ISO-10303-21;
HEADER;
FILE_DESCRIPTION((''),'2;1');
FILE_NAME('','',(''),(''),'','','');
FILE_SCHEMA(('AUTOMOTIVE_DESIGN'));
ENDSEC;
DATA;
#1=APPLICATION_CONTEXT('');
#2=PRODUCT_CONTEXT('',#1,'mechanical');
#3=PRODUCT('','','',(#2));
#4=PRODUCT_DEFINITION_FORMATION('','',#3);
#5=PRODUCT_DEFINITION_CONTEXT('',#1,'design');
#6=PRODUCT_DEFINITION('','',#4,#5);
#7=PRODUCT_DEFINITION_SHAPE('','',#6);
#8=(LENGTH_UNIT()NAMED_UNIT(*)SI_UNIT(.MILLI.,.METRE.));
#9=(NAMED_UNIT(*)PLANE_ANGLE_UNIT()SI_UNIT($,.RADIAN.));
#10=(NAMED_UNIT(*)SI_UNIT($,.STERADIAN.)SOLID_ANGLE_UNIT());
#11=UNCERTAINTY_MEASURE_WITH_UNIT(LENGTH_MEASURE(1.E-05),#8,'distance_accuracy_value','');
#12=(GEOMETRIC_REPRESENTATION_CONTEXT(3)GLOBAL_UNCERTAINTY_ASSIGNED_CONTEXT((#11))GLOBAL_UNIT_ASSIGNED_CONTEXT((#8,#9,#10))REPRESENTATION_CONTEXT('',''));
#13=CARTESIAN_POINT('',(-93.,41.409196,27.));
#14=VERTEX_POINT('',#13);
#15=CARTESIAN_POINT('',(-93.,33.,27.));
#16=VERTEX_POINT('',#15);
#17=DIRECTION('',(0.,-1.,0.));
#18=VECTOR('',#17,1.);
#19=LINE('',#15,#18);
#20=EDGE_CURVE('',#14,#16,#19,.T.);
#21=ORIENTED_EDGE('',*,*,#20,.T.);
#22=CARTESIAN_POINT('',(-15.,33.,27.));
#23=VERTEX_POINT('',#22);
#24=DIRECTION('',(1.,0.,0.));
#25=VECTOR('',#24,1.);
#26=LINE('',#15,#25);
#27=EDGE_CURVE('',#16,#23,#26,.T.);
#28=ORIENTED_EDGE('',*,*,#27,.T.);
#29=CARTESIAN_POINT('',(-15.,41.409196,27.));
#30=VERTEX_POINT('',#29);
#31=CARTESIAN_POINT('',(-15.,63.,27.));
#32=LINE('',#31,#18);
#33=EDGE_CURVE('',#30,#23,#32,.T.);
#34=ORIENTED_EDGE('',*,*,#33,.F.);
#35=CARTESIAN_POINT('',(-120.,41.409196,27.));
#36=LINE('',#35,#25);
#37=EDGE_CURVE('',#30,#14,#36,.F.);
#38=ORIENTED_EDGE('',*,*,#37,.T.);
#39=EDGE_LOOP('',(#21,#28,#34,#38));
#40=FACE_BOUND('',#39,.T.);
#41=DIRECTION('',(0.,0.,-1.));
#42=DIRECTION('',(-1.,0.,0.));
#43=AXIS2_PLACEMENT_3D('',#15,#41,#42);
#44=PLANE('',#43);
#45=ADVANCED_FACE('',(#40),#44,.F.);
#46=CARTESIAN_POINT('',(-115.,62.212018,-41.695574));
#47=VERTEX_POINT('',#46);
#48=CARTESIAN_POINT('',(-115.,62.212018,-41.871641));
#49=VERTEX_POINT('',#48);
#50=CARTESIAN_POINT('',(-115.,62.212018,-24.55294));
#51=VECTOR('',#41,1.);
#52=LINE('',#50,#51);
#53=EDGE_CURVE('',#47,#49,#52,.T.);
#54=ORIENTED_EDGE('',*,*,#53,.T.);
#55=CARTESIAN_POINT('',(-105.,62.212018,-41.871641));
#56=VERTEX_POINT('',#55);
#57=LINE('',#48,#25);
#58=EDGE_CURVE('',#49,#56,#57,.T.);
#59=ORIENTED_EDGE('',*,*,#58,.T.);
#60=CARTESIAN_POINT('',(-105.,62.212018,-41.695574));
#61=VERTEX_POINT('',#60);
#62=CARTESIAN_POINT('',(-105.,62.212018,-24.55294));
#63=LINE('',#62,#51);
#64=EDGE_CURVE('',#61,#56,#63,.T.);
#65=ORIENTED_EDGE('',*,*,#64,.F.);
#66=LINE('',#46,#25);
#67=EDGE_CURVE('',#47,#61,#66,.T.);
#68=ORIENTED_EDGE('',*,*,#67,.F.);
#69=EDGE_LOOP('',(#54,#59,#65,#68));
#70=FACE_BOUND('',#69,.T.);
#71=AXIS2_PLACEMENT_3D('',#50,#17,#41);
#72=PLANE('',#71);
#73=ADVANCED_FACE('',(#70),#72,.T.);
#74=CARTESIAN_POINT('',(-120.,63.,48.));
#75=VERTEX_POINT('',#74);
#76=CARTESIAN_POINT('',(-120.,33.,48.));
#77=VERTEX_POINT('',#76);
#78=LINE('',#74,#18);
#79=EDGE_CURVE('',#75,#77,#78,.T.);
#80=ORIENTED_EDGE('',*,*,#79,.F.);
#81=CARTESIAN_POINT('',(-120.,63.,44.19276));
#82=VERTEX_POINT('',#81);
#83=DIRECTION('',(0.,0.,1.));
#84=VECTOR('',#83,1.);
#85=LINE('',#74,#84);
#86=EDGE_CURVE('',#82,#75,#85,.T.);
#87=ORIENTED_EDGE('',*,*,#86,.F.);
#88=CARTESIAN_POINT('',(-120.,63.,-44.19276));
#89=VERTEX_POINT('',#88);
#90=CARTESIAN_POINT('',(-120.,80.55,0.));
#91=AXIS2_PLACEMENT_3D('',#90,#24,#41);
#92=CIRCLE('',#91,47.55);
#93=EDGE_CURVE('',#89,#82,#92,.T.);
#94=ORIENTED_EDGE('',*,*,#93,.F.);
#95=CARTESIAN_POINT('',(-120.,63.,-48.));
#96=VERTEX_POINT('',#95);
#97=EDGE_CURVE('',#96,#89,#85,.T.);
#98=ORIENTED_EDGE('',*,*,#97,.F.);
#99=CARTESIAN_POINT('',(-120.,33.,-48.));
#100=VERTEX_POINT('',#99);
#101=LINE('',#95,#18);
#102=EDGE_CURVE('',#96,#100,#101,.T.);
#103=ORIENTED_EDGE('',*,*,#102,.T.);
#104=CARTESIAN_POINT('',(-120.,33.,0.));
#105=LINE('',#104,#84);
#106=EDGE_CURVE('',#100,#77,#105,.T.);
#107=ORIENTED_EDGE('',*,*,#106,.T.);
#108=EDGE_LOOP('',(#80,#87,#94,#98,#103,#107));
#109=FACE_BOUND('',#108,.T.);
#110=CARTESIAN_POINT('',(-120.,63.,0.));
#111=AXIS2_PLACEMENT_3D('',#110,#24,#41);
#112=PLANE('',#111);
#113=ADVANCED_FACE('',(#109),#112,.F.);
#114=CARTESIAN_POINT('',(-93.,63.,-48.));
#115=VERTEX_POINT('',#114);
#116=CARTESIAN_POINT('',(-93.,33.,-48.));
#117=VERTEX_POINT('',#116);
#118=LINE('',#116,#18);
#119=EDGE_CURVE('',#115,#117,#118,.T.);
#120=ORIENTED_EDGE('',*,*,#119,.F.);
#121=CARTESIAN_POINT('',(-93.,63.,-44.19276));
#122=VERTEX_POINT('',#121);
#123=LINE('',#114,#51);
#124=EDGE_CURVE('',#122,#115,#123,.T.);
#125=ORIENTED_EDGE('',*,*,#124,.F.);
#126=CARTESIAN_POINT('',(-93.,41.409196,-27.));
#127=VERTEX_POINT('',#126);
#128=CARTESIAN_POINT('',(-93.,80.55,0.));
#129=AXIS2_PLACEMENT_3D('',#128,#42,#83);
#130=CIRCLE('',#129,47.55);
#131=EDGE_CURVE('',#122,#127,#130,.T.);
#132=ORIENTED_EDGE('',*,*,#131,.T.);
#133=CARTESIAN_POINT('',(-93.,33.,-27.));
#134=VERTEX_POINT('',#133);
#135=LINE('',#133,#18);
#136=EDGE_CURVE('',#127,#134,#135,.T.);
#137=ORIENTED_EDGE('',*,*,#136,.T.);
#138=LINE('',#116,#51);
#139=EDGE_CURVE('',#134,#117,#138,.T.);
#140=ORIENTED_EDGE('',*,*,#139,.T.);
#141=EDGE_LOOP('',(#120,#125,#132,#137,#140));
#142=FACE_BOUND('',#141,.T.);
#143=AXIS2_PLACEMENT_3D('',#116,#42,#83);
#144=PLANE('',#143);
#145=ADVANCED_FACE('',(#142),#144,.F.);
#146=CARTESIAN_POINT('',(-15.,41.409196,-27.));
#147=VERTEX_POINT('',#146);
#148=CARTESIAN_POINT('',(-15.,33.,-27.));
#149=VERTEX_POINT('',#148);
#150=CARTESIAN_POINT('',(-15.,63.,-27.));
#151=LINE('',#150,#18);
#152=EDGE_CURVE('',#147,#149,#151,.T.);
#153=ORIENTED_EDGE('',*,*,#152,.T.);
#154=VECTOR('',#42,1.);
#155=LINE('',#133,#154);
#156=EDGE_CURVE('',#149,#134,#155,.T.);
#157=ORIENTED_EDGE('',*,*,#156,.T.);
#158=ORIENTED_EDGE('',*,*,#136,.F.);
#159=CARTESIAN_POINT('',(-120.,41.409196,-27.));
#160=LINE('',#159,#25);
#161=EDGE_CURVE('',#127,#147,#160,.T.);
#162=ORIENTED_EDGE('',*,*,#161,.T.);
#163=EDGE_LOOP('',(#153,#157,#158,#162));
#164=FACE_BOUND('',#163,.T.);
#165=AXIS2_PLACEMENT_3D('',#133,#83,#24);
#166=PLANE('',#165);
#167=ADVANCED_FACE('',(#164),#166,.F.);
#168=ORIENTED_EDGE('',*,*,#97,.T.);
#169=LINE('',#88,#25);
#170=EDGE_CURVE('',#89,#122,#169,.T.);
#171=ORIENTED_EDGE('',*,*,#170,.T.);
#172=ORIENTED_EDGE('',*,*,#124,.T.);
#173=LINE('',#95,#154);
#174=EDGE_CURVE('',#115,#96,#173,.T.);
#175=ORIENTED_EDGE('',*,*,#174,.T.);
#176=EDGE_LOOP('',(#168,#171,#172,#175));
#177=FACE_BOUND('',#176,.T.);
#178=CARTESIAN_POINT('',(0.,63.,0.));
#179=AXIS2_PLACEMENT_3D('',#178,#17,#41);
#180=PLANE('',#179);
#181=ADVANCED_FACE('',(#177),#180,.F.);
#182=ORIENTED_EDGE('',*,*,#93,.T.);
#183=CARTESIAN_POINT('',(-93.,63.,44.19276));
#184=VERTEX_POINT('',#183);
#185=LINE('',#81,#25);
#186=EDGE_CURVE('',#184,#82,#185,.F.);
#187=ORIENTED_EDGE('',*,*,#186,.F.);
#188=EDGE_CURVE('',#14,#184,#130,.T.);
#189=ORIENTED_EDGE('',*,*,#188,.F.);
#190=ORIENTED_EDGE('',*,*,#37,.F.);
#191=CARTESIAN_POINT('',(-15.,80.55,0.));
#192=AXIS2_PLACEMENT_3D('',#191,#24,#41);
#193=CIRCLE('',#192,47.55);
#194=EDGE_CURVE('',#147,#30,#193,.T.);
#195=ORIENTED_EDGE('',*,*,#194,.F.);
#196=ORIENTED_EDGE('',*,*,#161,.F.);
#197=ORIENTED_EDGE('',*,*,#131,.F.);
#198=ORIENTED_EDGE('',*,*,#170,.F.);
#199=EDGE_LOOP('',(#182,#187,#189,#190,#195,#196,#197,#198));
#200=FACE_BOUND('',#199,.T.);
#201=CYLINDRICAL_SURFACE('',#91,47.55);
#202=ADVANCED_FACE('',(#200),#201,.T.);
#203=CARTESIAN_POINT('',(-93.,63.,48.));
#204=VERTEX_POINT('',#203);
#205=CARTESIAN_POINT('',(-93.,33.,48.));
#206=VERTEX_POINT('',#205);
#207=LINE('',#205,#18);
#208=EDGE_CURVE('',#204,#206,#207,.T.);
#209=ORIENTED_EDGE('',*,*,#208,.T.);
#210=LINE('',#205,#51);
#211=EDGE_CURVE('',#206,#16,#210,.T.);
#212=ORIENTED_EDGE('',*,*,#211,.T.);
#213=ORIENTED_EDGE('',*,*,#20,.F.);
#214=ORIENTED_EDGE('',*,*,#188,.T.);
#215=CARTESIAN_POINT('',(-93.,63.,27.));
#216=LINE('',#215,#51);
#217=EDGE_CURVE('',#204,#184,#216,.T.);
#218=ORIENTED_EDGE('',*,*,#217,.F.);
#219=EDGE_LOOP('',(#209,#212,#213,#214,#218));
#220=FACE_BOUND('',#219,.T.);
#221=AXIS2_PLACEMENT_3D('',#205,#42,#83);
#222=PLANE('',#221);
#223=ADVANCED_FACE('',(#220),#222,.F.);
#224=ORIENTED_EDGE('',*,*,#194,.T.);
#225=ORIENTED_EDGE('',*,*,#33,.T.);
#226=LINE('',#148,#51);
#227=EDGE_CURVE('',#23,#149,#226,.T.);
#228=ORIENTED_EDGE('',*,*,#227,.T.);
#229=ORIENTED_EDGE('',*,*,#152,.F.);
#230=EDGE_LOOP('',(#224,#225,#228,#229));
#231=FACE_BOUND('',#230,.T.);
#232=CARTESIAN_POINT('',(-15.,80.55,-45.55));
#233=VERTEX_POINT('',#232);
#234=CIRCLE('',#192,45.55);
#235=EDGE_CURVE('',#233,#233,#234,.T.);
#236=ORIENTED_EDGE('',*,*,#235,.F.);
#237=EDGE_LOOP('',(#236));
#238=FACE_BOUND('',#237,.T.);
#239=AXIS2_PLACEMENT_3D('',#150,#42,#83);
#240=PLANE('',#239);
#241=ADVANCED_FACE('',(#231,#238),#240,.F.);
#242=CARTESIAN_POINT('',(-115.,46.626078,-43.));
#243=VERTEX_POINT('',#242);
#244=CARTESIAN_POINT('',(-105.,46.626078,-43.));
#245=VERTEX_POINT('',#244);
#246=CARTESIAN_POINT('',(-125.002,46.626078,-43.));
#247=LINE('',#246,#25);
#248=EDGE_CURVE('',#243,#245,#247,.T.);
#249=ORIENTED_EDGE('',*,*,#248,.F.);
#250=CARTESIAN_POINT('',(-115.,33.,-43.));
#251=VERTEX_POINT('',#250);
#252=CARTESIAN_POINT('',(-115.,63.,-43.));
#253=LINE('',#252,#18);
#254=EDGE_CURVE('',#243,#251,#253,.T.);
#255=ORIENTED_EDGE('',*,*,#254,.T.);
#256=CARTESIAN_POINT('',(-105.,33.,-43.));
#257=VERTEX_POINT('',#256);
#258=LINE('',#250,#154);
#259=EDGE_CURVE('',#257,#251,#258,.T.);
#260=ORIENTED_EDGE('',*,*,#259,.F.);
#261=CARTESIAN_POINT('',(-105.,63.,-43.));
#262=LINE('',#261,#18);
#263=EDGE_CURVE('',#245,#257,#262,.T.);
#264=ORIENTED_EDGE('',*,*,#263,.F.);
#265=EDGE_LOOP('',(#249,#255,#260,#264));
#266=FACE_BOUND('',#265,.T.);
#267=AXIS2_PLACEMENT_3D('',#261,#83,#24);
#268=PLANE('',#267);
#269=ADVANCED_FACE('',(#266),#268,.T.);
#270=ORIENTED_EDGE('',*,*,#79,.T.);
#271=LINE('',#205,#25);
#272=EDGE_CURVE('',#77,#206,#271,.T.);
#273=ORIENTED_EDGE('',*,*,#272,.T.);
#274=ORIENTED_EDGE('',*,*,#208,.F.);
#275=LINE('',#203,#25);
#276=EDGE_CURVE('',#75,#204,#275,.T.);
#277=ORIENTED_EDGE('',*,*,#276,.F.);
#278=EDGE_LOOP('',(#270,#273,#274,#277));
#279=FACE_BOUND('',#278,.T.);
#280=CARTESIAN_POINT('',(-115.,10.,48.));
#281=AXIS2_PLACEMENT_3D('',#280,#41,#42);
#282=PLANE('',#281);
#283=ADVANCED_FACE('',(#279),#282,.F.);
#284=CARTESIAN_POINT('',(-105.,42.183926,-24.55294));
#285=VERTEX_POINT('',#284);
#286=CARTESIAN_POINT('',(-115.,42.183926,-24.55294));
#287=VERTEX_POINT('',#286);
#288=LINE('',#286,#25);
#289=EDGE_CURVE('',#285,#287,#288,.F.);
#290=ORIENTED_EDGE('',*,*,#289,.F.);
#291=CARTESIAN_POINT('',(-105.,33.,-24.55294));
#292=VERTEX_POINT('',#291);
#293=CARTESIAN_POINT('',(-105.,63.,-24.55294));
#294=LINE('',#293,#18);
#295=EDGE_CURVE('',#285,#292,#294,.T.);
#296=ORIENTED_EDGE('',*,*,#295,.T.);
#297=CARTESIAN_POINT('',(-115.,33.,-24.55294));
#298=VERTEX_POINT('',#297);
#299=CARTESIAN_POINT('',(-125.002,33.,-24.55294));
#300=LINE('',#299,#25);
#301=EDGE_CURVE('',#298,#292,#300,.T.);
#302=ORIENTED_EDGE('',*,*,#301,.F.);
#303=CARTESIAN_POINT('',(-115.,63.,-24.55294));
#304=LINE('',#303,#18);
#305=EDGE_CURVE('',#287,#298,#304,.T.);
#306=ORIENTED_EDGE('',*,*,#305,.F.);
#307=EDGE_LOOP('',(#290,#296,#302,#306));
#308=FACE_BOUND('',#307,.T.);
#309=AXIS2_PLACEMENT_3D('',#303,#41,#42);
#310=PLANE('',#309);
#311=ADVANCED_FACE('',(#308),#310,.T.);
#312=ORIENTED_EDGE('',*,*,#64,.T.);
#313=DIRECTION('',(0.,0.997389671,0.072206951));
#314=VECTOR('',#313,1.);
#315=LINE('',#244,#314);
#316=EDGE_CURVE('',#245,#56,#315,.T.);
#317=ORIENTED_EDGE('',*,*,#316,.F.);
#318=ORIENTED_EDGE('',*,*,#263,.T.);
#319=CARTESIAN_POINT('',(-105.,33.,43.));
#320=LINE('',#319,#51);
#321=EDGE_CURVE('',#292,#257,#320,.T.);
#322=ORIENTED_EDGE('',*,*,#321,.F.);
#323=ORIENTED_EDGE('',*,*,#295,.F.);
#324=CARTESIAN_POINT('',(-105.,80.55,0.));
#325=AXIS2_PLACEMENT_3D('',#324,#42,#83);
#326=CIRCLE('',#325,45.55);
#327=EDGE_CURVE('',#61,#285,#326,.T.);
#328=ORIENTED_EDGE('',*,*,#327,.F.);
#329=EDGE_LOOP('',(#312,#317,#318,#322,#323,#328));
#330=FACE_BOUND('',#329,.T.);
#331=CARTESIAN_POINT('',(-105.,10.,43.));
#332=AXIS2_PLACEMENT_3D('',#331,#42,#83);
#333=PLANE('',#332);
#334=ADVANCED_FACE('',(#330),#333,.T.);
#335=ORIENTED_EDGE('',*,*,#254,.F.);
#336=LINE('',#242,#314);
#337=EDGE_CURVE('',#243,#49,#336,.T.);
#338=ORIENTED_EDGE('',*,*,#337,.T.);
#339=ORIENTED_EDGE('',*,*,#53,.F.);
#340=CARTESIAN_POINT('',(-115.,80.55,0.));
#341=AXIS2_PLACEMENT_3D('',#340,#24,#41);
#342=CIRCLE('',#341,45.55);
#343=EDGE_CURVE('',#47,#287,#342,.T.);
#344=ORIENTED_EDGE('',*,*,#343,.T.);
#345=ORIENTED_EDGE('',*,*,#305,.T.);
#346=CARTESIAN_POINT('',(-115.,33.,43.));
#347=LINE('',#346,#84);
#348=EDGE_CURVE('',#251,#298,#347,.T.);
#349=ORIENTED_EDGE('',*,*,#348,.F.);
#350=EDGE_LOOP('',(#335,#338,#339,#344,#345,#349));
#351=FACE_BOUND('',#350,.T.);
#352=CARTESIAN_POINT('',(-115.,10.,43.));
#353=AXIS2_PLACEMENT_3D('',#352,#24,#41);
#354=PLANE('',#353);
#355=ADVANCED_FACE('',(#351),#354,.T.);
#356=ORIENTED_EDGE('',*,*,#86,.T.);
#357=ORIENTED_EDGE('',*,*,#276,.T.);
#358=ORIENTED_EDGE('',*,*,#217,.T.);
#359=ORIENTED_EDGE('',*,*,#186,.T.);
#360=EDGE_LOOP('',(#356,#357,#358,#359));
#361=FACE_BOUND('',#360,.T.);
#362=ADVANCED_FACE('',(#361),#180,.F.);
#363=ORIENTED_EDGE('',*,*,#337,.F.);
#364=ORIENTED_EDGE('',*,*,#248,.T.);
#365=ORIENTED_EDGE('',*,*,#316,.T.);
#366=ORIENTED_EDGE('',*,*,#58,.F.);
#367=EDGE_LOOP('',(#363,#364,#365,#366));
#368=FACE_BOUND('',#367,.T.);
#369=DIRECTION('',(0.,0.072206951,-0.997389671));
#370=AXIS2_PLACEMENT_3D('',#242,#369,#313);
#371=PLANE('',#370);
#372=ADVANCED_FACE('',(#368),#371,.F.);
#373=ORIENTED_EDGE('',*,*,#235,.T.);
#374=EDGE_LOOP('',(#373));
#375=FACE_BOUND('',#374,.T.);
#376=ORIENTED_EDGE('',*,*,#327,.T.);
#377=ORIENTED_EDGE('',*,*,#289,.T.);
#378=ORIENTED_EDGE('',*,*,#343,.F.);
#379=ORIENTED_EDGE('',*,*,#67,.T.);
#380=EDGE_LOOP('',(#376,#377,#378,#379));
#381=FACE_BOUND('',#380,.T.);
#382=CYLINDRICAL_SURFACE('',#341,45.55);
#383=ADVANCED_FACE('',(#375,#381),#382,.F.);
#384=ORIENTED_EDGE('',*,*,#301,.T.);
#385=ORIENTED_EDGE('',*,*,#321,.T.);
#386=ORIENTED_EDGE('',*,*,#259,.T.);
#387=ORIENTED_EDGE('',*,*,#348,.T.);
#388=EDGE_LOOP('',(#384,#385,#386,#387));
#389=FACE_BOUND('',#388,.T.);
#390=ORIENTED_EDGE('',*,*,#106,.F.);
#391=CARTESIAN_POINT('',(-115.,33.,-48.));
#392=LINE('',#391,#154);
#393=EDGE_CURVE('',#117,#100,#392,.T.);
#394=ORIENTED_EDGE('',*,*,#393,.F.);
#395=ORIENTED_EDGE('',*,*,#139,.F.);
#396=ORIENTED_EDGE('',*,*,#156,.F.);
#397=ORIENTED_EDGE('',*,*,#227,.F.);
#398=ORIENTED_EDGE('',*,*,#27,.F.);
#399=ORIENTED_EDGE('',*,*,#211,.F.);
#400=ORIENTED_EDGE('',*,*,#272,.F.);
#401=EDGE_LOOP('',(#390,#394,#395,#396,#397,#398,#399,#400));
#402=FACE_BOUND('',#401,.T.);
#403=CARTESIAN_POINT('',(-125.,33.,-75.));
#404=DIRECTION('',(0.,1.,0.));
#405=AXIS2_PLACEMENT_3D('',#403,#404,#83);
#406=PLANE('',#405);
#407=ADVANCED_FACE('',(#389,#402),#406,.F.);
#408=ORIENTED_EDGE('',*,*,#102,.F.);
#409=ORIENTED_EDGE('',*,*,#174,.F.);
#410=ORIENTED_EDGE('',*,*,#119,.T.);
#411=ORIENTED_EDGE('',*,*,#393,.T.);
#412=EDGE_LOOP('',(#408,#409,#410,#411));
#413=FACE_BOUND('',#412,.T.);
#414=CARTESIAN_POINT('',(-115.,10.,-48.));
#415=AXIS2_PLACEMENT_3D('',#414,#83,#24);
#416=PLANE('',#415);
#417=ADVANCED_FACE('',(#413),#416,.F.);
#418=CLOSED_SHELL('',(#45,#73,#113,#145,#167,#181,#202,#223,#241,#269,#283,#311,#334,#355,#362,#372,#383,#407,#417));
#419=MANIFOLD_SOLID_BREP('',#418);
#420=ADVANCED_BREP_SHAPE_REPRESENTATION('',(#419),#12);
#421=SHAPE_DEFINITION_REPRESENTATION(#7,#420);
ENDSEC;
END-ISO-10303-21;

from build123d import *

# Parameters (mm, degrees)
SKETCH2_W                = 10
SKETCH2_H                = 86
BOSS_EXTRUDE1_DEPTH      = 10
SKETCH3_W                = 10
SKETCH3_H                = 86
BOSS_EXTRUDE2_DEPTH      = 23
BOSS_EXTRUDE3_REACH      = 246.16
BOSS_EXTRUDE4_DEPTH      = 100
BOSS_EXTRUDE4_DEPTH_BACK = 5
SKETCH5_R                = 47.55
SKETCH7_W                = 10
SKETCH7_H                = 18.447060317
BOSS_EXTRUDE6_DEPTH      = 30
CUT_EXTRUDE2_DEPTH       = 10
BOSS_EXTRUDE7_REACH      = 275.742
SKETCH6_R                = 45.55
CUT_EXTRUDE1_DEPTH       = 100
SKETCH10_W               = 15
SKETCH10_H               = 10
SKETCH10_W_2             = 10
SKETCH10_H_2             = 15
BOSS_EXTRUDE8_DEPTH      = 28.5
FILLET1_R                = 30
FILLET2_R                = 30
FILLET3_R                = 30
SKETCH11_W               = 250
SKETCH11_H               = 33
CUT_EXTRUDE3_DEPTH       = 234.52646531


with BuildPart() as part:
    # Sketch2 → Boss-Extrude1 (new body)
    with BuildSketch(Plane(origin=(0, 0, 0), x_dir=(1, 0, 0), z_dir=(0, 1, 0))):
        Polygon((-125, -75), (-115, -75), (-115, -48), (-47, -48), (-47, -75), (47, -75), (47, -48), (115, -48), (115, -75), (125, -75), (125, 75), (115, 75), (115, 48), (47, 48), (47, 75), (-47, 75), (-47, 48), (-115, 48), (-115, 75), (-125, 75), align=None)
        with Locations((-110, 0)):
            Rectangle(SKETCH2_W, SKETCH2_H, mode=Mode.SUBTRACT)
    extrude(amount=BOSS_EXTRUDE1_DEPTH)

    # Sketch3 → Boss-Extrude2 (add)
    with BuildSketch(Plane(origin=(0, 10, 0), x_dir=(1, 0, 0), z_dir=(0, 1, 0))):
        Polygon((-47, 48), (-47, 75), (47, 75), (47, 48), (26, 48), (26, 27), (93, 27), (93, 48), (115, 48), (115, 75), (125, 75), (125, -75), (115, -75), (115, -48), (93, -48), (93, -27), (26, -27), (26, -48), (47, -48), (47, -75), (-47, -75), (-47, -48), (-26, -48), (-26, -27), (-93, -27), (-93, -48), (-115, -48), (-115, -75), (-125, -75), (-125, 75), (-115, 75), (-115, 48), (-93, 48), (-93, 27), (-26, 27), (-26, 48), align=None)
        with Locations((-110, 0)):
            Rectangle(SKETCH3_W, SKETCH3_H, mode=Mode.SUBTRACT)
    extrude(amount=BOSS_EXTRUDE2_DEPTH)

    # Sketch4 → Boss-Extrude3 (add, up to next)
    with BuildSketch(Plane.ZY.offset(105), mode=Mode.PRIVATE) as boss_extrude3_sk1:
        Polygon((-43, 0), (-9.223530158, 14.703891082), (-43, 33), align=None)
    boss_extrude3_tool1 = extrude(boss_extrude3_sk1.sketch, amount=BOSS_EXTRUDE3_REACH, mode=Mode.PRIVATE) - part.part
    # Sketch4 → Boss-Extrude3 (add, up to next)
    with BuildSketch(Plane.ZY.offset(105), mode=Mode.PRIVATE) as boss_extrude3_sk2:
        Polygon((43, 0), (9.223530158, 14.703891082), (-24.552939683, 33), (43, 33), align=None)
    boss_extrude3_tool2 = extrude(boss_extrude3_sk2.sketch, amount=BOSS_EXTRUDE3_REACH, mode=Mode.PRIVATE) - part.part
    add(boss_extrude3_tool1.solids().sort_by_distance((-105, 15.901297, -31.741177))[0])
    add(boss_extrude3_tool2.solids().sort_by_distance((-105, 21.685197, 19.901194))[0])



with BuildPart() as body_2:
    # Sketch5 → Boss-Extrude4 (new, two sides: drawn at the far end of the back side and taken through both)
    with BuildSketch(Plane(origin=(-115, 0, 0), x_dir=(0, 0, -1), z_dir=(1, 0, 0)).offset(-BOSS_EXTRUDE4_DEPTH_BACK)):
        with Locations((0, 80.55)):
            Circle(SKETCH5_R)
    extrude(amount=BOSS_EXTRUDE4_DEPTH + BOSS_EXTRUDE4_DEPTH_BACK)


with BuildPart() as part_1:
    add(part.part)

    add(body_2.part)  # Boss-Extrude6 merges body 2
    # Sketch7 → Boss-Extrude6 (add)
    with BuildSketch(Plane(origin=(0, 33, 0), x_dir=(1, 0, 0), z_dir=(0, 1, 0))):
        Polygon((-120, 0), (-120, 48), (-93, 48), (-93, 27), (-15, 27), (-15, -27), (-93, -27), (-93, -48), (-120, -48), align=None)
        with Locations((-110, 33.776469842)):
            Rectangle(SKETCH7_W, SKETCH7_H, mode=Mode.SUBTRACT)
    extrude(amount=BOSS_EXTRUDE6_DEPTH)

    # Sketch8 → Cut-Extrude2 (cut)
    with BuildSketch(Plane.ZY.offset(105)):
        Polygon((-43, 46.626077643), (-41.871641374, 62.212018017), (-24.552939683, 62.212018017), (-24.552939683, 33), (-43, 33), align=None)
    extrude(amount=CUT_EXTRUDE2_DEPTH, mode=Mode.SUBTRACT)

    # Sketch9 → Boss-Extrude7 (add, up to next)
    with BuildSketch(Plane.ZY.offset(105), mode=Mode.PRIVATE) as boss_extrude7_sk1:
        Polygon((-42.138917347, 58.520153318), (-43, 46.626077643), (-43, 62.212018017), (-41.871641374, 62.212018017), align=None)
    boss_extrude7_tool1 = extrude(boss_extrude7_sk1.sketch, amount=BOSS_EXTRUDE7_REACH, mode=Mode.PRIVATE) - part_1.part
    add(boss_extrude7_tool1.solids().sort_by_distance((-105, 57.016705, -42.62388))[0])

    # Sketch6 → Cut-Extrude1 (cut)
    with BuildSketch(Plane(origin=(-15, 0, 0), x_dir=(0, 0, -1), z_dir=(1, 0, 0))):
        with Locations((0, 80.55)):
            Circle(SKETCH6_R)
    extrude(amount=-CUT_EXTRUDE1_DEPTH, mode=Mode.SUBTRACT)

    # Sketch10 → Boss-Extrude8 (add)
    with BuildSketch(Plane(origin=(0, 33, 0), x_dir=(1, 0, 0), z_dir=(0, 1, 0))):
        with Locations((12.5, 39)):
            Rectangle(SKETCH10_W, SKETCH10_H)
        with Locations((12.5, -39)):
            Rectangle(SKETCH10_W, SKETCH10_H)
        with Locations((63, 0)):
            Rectangle(SKETCH10_W_2, SKETCH10_H_2)
    extrude(amount=BOSS_EXTRUDE8_DEPTH)

    # Fillet1
    # the kernel refuses this fillet: 30 mm, written as the material it adds along each edge
    with BuildSketch(Plane(origin=(5, 33, 44), x_dir=(0, 0, 1), z_dir=(1, 0, 0))) as fillet1_piece_1:
        with BuildLine():
            CenterArc((29.962476533, -30), FILLET1_R, 90, 87.134016017)
            Line((0, -28.5), (0, 0))
            Line((0, 0), (29.962476533, 0))
        make_face()
    extrude(amount=15)

    # Fillet2
    # the kernel refuses this fillet: 30 mm, written as the material it adds along each edge
    with BuildSketch(Plane(origin=(20, 33, -44), x_dir=(0, 0, -1), z_dir=(-1, 0, 0))) as fillet2_piece_1:
        with BuildLine():
            CenterArc((29.962476533, -30), FILLET2_R, 90, 87.134016017)
            Line((0, -28.5), (0, 0))
            Line((0, 0), (29.962476533, 0))
        make_face()
    extrude(amount=15)

    # Fillet3
    # the kernel refuses this fillet: 30 mm, written as the material it adds along each edge
    with BuildSketch(Plane(origin=(68, 33, 7.5), x_dir=(1, 0, 0), z_dir=(0, 0, -1))) as fillet3_piece_1:
        with BuildLine():
            CenterArc((29.962476533, -30), FILLET3_R, 90, 87.134016017)
            Line((0, -28.5), (0, 0))
            Line((0, 0), (29.962476533, 0))
        make_face()
    extrude(amount=15)

    # Sketch11 → Cut-Extrude3 (cut, through all)
    with BuildSketch(Plane.XY.offset(75)):
        with Locations((0, 16.5)):
            Rectangle(SKETCH11_W, SKETCH11_H)
    extrude(amount=-CUT_EXTRUDE3_DEPTH, mode=Mode.SUBTRACT)


with BuildPart() as cut_extrude3_piece_1:
    # of the separate pieces the step leaves, piece 1, a body of its own (cut_extrude3_pieces)
    add(part_1.part.solids().sort_by_distance((-93, 33, 27))[0])


with BuildPart() as cut_extrude3_piece_2:
    # of the separate pieces the step leaves, piece 2, a body of its own (cut_extrude3_pieces)
    add(part_1.part.solids().sort_by_distance((97.962476533, 33, 7.5))[0])


with BuildPart() as cut_extrude3_piece_3:
    # of the separate pieces the step leaves, piece 3, a body of its own (cut_extrude3_pieces)
    add(part_1.part.solids().sort_by_distance((20, 33, 34))[0])


with BuildPart() as cut_extrude3_piece_4:
    # of the separate pieces the step leaves, piece 4, a body of its own (cut_extrude3_pieces)
    add(part_1.part.solids().sort_by_distance((20, 33, -73.962476533))[0])


solid = cut_extrude3_piece_1.part
